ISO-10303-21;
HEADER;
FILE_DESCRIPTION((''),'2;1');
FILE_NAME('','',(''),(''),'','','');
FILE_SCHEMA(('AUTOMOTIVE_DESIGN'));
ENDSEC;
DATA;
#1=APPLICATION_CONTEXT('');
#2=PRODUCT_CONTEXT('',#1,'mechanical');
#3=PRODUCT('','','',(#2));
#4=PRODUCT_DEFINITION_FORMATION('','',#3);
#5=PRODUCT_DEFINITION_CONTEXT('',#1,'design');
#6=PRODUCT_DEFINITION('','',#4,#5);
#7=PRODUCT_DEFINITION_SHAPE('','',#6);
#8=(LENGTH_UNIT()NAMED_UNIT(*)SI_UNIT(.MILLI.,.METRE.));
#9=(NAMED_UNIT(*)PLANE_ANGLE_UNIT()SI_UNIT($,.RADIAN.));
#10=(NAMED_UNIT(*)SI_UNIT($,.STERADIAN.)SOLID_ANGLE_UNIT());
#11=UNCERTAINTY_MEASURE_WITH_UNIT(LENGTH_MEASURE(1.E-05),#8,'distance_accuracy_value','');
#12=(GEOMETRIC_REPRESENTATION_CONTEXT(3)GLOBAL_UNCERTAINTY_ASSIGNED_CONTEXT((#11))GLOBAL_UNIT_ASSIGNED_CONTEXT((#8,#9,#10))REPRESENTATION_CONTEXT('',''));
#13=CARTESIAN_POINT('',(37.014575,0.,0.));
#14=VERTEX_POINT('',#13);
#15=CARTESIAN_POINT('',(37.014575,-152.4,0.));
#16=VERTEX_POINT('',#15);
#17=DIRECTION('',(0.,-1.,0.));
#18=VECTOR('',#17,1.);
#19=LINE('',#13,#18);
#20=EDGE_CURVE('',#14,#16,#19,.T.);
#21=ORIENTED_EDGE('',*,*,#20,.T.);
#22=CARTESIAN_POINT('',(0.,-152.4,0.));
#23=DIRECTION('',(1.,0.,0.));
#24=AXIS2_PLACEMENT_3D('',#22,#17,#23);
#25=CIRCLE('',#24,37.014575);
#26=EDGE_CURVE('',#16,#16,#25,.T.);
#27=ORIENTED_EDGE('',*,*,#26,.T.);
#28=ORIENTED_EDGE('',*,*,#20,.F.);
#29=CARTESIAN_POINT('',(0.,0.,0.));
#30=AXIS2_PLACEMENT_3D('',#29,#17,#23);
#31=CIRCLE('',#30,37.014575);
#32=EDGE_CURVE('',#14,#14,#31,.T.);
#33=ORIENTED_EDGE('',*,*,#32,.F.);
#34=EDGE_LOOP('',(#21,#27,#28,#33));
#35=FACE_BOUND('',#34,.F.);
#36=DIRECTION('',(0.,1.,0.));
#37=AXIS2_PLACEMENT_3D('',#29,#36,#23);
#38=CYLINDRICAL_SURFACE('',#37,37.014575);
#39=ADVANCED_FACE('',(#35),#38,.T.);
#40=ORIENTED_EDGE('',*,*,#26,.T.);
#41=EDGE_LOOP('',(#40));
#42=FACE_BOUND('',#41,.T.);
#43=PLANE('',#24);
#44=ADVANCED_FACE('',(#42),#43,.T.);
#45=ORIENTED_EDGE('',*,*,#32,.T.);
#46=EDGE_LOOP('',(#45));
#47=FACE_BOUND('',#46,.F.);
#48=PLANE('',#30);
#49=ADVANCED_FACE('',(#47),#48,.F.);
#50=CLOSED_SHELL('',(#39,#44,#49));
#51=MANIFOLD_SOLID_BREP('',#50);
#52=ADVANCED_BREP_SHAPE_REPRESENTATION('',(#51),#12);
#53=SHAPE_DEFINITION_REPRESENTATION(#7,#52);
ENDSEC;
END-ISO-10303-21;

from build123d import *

# Parameters (mm, degrees)
F1_R     = 37.0145750202
F2_DEPTH = 152.4


# Not quite as in the source:
# - the program builds the solid bodies; features that only make, move or delete a surface that nothing else refers to are left out


with BuildPart() as f2:
    # F1 (on face) → F2 (new body)
    with BuildSketch(Plane.XZ):
        Circle(F1_R)
    extrude(amount=F2_DEPTH)


solid = f2.part
